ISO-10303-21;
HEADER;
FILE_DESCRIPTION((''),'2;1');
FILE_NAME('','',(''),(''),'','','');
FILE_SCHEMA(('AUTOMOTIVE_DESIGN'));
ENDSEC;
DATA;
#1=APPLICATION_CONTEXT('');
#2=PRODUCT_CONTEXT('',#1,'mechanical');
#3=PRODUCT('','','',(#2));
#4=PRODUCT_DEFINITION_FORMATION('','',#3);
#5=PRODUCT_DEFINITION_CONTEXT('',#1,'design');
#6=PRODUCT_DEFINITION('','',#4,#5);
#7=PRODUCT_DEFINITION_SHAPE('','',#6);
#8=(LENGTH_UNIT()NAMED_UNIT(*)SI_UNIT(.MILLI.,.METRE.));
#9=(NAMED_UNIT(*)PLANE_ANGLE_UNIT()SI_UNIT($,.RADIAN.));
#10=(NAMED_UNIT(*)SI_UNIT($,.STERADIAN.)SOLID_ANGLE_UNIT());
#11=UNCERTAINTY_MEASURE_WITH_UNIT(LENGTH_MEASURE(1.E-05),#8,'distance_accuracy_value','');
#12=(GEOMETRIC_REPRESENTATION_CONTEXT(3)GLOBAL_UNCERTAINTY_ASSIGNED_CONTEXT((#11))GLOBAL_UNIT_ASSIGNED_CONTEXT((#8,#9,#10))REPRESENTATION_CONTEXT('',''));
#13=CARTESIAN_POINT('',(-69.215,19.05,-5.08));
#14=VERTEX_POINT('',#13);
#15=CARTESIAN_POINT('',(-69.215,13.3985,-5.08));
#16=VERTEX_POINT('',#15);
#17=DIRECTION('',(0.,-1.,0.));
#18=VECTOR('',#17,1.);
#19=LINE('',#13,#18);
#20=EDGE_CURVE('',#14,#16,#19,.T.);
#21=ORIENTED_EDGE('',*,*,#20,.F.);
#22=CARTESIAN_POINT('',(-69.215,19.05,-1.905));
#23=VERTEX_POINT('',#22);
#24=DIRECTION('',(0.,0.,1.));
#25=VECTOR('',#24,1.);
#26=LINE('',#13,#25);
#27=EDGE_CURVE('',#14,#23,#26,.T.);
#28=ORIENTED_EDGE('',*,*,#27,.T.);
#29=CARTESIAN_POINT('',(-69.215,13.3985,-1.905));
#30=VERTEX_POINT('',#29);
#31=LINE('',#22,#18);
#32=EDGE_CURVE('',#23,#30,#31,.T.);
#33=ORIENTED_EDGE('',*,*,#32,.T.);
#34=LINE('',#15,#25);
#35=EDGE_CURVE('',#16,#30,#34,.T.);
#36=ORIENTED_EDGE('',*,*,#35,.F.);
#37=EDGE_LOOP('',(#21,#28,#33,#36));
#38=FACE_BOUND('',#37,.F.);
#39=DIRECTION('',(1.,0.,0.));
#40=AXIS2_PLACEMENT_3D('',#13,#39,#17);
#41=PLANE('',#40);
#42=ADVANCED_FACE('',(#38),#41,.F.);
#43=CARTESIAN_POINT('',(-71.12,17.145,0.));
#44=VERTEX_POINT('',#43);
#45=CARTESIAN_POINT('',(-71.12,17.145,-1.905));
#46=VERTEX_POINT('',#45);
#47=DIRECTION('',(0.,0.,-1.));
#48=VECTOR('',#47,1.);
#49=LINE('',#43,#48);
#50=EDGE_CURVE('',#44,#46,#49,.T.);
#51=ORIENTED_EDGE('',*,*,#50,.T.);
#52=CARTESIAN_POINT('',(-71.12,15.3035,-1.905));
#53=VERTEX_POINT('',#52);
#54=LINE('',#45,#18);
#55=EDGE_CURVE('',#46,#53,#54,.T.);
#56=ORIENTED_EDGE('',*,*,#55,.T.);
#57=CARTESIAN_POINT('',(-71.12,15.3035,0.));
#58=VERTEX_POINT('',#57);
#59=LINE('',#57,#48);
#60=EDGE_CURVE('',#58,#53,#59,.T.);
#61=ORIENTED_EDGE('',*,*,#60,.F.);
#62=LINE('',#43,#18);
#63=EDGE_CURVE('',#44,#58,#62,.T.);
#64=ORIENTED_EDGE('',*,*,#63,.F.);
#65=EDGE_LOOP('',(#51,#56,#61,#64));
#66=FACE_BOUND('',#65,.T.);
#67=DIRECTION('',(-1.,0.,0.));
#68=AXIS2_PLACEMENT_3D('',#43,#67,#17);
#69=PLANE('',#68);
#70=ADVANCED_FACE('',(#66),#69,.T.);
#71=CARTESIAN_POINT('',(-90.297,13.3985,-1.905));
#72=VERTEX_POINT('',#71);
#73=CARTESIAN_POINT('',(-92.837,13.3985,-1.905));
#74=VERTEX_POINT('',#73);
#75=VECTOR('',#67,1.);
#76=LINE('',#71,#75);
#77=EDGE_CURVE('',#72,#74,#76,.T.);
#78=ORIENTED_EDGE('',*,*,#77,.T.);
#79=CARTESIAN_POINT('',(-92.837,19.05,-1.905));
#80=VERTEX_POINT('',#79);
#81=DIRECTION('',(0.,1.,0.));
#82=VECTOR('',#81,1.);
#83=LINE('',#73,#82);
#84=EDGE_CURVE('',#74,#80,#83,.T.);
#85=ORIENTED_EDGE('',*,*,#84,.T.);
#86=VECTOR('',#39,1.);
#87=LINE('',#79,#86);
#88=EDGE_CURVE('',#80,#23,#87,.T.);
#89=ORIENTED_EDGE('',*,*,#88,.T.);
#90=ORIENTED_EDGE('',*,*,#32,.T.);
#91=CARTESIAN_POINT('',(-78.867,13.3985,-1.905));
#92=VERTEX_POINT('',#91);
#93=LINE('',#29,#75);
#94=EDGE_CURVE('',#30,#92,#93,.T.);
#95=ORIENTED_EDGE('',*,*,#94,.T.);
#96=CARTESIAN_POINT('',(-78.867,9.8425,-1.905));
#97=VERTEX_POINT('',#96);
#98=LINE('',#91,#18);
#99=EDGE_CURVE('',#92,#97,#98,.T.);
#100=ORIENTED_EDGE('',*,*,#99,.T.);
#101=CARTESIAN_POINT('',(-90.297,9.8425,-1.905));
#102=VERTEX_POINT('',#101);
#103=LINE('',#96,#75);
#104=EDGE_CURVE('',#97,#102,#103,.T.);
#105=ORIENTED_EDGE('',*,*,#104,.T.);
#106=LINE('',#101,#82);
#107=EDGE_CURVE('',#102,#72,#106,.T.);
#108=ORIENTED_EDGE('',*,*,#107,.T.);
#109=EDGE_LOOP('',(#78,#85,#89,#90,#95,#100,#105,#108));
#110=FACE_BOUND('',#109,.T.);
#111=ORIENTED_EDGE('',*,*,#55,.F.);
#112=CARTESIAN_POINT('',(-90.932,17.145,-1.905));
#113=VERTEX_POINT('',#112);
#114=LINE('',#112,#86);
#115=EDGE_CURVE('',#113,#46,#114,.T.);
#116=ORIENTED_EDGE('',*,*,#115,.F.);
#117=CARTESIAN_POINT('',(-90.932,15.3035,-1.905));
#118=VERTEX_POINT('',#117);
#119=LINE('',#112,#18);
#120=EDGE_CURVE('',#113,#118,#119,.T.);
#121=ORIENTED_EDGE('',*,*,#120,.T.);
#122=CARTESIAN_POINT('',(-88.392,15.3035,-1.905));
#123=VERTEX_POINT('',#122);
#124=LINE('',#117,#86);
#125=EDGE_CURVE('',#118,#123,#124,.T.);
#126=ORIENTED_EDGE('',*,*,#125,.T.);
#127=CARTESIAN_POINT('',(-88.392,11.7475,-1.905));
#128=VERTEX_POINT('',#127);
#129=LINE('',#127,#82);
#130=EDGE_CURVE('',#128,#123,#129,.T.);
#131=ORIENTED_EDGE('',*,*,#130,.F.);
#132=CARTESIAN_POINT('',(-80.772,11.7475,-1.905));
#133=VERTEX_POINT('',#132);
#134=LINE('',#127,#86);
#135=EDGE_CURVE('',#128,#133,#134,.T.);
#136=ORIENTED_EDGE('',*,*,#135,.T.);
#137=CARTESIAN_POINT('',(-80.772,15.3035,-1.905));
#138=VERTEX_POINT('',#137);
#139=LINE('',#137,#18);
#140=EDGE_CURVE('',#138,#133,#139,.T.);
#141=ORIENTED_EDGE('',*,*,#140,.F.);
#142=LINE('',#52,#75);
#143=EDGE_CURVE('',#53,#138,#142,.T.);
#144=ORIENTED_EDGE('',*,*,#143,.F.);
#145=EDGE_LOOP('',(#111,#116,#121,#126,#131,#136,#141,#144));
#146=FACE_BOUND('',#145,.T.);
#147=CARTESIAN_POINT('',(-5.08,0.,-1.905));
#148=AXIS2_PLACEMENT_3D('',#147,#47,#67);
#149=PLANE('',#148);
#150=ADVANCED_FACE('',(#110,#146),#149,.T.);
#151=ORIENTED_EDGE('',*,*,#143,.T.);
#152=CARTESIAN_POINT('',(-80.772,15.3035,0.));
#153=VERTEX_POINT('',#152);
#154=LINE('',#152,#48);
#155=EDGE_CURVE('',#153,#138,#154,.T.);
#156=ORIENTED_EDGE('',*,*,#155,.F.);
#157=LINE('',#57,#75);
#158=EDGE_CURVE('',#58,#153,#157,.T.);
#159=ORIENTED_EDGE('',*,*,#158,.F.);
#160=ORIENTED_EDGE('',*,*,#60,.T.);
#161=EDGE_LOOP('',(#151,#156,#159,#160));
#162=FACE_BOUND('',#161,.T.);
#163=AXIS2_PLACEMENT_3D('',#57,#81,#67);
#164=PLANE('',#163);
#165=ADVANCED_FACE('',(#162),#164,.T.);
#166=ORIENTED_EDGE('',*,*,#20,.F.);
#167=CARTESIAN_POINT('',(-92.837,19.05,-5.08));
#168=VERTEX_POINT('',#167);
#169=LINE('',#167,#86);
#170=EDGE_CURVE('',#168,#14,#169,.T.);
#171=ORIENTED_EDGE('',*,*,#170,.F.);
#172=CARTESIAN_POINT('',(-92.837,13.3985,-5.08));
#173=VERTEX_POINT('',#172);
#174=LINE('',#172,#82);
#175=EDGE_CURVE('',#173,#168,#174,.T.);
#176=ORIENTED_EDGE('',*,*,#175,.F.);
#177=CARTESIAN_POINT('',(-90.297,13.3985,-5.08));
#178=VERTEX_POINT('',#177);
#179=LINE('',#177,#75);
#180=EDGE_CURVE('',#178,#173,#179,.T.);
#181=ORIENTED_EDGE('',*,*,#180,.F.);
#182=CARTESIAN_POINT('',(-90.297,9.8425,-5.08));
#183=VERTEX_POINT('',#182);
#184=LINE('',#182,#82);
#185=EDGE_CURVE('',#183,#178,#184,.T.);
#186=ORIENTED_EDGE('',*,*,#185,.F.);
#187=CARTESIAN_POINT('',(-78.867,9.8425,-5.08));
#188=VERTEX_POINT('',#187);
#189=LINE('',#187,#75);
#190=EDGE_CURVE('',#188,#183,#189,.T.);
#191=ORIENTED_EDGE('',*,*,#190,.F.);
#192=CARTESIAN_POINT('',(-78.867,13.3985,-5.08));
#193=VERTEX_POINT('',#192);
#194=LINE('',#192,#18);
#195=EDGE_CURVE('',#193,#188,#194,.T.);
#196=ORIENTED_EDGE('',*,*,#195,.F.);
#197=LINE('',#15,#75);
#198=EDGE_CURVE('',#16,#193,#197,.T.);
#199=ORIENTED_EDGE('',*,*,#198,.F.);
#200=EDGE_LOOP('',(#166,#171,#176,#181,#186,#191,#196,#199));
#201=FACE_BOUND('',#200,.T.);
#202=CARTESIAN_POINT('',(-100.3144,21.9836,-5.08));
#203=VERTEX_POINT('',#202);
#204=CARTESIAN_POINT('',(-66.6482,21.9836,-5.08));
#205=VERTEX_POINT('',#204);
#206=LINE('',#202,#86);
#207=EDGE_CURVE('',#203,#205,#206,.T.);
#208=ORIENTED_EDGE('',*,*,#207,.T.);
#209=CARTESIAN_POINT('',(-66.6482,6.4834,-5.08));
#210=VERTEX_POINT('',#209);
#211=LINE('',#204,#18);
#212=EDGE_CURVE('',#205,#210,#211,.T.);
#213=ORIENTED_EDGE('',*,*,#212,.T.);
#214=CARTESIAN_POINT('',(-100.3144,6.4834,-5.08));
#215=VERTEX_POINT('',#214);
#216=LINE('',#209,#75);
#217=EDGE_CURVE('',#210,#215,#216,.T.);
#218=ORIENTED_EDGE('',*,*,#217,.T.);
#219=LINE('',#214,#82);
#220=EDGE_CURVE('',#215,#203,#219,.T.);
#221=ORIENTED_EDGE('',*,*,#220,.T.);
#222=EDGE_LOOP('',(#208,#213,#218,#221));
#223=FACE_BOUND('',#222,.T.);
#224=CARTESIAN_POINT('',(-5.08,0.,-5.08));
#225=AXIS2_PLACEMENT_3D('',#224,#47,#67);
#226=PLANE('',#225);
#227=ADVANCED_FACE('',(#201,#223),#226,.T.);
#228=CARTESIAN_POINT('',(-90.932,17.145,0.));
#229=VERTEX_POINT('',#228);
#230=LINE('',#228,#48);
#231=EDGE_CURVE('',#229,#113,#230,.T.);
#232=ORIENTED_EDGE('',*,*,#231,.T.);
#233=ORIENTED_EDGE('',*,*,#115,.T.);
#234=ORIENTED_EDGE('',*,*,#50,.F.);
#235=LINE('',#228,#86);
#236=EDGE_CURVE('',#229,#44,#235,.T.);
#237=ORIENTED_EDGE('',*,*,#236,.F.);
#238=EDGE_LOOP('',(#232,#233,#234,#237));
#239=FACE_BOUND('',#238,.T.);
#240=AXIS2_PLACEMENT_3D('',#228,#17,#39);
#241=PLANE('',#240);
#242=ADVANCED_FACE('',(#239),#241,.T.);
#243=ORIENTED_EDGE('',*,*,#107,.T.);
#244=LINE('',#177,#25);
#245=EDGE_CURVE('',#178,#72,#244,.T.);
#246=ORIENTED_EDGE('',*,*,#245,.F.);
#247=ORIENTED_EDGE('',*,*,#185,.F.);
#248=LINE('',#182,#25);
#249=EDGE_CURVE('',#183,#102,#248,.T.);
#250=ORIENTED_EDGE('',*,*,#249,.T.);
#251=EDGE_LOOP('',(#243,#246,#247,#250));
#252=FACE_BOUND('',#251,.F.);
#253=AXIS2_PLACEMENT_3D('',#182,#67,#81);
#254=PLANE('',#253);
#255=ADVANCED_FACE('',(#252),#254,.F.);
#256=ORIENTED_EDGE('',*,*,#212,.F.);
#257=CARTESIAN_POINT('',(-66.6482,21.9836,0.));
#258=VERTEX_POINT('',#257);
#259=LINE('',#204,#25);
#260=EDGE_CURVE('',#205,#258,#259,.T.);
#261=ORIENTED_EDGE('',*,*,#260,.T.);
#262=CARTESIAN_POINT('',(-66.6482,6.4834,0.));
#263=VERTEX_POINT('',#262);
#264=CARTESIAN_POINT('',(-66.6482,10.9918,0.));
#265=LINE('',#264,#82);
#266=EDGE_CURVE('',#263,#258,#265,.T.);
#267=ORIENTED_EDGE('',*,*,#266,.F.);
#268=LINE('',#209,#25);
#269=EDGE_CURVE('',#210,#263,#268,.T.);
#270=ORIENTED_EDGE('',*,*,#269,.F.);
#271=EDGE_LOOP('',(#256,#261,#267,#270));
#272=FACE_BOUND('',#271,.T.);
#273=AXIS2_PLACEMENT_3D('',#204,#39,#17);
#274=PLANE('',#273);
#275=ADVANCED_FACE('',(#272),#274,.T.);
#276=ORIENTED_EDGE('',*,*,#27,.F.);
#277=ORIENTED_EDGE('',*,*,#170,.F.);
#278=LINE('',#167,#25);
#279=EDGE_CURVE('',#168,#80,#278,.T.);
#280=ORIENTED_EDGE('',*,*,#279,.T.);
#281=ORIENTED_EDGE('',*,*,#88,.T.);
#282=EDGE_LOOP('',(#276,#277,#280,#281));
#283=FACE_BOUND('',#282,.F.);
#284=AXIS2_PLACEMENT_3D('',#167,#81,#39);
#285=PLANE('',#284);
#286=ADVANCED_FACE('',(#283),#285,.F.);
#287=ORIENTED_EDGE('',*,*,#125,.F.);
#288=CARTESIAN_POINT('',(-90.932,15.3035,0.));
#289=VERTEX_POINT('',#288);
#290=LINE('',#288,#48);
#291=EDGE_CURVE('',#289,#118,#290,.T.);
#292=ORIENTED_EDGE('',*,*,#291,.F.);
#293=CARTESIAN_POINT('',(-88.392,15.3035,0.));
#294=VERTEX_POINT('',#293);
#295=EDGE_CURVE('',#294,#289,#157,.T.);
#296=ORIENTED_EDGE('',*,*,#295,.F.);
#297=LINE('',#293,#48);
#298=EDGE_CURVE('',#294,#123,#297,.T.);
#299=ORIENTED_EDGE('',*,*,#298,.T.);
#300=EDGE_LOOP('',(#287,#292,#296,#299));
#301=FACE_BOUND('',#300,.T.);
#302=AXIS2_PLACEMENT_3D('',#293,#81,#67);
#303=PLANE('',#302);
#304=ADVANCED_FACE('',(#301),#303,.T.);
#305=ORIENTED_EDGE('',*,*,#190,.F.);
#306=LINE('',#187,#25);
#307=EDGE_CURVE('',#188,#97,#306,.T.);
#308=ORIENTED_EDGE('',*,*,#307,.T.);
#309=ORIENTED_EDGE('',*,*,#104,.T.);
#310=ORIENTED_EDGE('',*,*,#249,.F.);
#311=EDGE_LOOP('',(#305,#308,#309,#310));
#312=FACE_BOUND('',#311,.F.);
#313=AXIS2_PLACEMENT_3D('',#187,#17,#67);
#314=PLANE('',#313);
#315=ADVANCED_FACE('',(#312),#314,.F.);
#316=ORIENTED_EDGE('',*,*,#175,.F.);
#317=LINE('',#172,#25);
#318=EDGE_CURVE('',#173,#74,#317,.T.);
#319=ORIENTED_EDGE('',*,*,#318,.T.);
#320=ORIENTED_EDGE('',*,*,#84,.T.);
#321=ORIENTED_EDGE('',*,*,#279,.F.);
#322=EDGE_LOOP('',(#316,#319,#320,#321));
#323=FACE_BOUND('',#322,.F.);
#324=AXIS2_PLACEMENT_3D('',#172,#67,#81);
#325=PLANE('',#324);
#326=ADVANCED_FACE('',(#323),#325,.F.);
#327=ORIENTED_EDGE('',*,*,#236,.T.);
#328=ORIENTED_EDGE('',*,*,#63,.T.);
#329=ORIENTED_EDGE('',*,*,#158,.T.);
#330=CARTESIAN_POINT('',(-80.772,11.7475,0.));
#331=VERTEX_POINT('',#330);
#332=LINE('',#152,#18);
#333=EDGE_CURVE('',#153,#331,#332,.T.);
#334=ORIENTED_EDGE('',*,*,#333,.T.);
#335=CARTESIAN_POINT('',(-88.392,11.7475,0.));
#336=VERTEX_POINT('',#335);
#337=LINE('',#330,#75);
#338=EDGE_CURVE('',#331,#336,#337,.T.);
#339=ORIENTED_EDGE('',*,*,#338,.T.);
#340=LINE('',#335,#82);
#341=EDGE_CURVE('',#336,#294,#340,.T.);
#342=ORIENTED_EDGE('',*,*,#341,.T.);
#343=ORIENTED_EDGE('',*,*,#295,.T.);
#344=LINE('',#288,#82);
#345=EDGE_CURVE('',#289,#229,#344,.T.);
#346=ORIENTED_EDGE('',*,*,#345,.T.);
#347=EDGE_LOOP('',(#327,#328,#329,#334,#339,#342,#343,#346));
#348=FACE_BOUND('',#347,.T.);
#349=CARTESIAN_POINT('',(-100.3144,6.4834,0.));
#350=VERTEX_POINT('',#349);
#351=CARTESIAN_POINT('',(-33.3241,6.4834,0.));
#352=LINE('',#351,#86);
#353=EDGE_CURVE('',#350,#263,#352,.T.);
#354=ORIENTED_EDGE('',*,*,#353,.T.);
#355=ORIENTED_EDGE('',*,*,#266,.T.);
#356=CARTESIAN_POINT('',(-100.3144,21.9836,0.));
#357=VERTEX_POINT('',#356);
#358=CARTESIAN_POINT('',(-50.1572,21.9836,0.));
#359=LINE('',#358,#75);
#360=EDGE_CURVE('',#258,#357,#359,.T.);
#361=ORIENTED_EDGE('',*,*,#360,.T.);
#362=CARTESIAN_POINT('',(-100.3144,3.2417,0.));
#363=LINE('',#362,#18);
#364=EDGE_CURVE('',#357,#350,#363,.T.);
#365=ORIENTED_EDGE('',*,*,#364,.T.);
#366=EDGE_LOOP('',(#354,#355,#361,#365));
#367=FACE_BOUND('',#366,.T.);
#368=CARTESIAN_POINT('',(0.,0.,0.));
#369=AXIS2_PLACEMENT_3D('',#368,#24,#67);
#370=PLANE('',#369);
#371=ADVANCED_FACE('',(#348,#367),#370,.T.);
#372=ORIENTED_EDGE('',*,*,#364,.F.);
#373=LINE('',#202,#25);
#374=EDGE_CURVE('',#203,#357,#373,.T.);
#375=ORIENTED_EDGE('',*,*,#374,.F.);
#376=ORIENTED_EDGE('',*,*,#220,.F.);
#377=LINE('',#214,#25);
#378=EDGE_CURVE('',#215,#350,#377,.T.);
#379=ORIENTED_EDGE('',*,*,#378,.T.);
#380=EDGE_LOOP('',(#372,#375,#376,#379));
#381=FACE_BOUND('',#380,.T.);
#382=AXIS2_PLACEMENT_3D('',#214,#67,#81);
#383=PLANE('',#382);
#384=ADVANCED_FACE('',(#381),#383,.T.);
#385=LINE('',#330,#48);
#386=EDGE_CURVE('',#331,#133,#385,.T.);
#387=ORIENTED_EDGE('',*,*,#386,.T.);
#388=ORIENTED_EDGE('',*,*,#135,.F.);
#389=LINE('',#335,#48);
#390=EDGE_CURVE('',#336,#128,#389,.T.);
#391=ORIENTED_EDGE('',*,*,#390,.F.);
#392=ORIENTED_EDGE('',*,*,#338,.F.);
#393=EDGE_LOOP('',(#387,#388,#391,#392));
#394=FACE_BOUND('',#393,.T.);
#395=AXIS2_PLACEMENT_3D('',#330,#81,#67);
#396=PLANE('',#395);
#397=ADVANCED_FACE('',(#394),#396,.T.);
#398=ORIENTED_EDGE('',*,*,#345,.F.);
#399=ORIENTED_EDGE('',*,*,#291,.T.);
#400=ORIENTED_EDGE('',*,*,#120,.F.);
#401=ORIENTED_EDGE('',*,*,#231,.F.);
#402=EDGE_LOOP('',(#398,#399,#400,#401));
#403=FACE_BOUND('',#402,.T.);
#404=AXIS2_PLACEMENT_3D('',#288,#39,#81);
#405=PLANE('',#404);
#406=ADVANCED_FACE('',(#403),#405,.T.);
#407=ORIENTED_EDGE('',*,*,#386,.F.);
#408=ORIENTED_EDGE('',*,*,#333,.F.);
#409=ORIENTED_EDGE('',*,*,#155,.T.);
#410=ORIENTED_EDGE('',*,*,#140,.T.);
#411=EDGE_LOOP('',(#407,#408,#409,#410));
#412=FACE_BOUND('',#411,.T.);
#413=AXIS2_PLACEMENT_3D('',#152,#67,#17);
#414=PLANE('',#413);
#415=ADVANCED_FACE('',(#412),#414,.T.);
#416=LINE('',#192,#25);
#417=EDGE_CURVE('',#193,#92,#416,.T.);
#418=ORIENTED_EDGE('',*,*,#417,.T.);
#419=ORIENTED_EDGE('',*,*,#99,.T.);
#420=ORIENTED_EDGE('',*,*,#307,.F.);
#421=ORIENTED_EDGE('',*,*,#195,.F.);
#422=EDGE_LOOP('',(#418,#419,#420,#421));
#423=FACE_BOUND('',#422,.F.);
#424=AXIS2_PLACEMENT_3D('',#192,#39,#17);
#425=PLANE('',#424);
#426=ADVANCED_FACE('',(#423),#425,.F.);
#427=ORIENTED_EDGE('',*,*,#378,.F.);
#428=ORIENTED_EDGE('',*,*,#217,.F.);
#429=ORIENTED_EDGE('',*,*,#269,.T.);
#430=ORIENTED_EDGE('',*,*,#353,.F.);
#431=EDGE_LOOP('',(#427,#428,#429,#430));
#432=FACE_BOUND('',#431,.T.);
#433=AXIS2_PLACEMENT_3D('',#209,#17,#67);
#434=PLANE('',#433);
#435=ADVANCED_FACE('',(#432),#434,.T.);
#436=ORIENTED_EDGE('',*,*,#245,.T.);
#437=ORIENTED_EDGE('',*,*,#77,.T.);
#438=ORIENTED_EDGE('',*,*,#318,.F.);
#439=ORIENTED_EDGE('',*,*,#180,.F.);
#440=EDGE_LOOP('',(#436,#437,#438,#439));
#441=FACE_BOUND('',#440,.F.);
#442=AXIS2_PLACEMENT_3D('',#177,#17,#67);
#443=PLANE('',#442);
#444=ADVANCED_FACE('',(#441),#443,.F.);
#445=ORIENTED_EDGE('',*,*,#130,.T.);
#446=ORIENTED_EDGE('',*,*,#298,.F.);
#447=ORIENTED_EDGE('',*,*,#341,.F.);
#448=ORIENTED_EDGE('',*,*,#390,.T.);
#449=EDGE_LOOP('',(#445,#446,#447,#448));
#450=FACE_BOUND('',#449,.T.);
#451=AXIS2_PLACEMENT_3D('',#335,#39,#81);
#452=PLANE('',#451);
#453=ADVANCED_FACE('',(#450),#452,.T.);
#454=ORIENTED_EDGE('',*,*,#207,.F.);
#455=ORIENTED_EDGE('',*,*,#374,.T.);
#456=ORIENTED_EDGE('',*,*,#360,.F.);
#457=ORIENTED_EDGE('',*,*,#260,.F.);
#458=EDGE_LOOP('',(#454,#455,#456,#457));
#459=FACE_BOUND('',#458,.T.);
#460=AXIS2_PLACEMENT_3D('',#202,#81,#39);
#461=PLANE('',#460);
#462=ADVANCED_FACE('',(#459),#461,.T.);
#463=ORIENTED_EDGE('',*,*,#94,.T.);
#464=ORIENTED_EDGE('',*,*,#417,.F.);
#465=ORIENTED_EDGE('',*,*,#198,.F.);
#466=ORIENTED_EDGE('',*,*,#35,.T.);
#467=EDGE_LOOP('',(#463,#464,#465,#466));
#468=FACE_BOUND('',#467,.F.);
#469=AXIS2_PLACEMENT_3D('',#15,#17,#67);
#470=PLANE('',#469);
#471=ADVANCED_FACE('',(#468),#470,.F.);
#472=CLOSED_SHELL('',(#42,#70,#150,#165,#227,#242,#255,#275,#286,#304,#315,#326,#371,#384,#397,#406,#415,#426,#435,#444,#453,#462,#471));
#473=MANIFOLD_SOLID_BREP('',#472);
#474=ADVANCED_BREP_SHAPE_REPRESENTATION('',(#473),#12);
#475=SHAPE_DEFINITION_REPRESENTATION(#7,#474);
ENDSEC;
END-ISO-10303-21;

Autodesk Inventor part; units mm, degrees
ref_plane "YZ Plane" through (0, 0, 0) normal (1, 0, 0) x (0, 1, 0)
ref_plane "XZ Plane" through (0, 0, 0) normal (0, 1, 0) x (-1, 0, 0)
ref_plane "XY Plane" through (0, 0, 0) normal (0, 0, 1) x (1, 0, 0)
sketch "Sketch1" plane through (0, 0, 0) normal (0, 1, 0) x (-1, 0, 0)
  line L0 (0, 0) -> (177.8, 0)
  line L1 (177.8, 0) -> (177.8, -114.3)
  line L2 (177.8, -114.3) -> (0, -114.3)
  line L3 (0, -114.3) -> (0, 0)
  dimension "d0" = 177.8
  dimension "d1" = 114.3
extrude "Extrusion1" add sketch "Sketch1" along normal blind 38.1
sketch "Sketch2" plane through (0, 0, 0) normal (0, -1, 0) x (1, 0, 0)
  line L0 (-177.8, -114.3) -> (-177.8, 0) projected
  line L1 (0, 0) -> (-177.8, 0)
  line L2 (-177.8, 0) -> (-177.8, -114.3)
  line L3 (-177.8, -114.3) -> (0, -114.3)
  line L4 (0, -114.3) -> (0, 0)
  line L5 (-5.08, -5.08) -> (-172.72, -5.08)
  line L6 (-172.72, -5.08) -> (-172.72, -109.22)
  line L7 (-172.72, -109.22) -> (-5.08, -109.22)
  line L8 (-5.08, -109.22) -> (-5.08, -5.08)
  dimension "d4" = 5.08
extrude "Extrusion2" cut sketch "Sketch2" against normal blind 35.56 contours L8 L7 L6 L5
fillet "Fillet1" radius 3.175 4 edges at (-177.8, 38.1, -57.15) (-88.9, 38.1, 0) (-88.9, 38.1, -114.3) (0, 38.1, -57.15)
sketch "Sketch3" plane through (0, 38.1, 0) normal (0, 1, 0) x (1, 0, 0)
  line L0 (-177.8, 114.3) -> (-171.45, 114.3)
  line L1 (-171.45, 114.3) -> (-171.45, 0)
  line L2 (-171.45, 0) -> (-177.8, 0)
  line L3 (-177.8, 0) -> (-177.8, 114.3)
  line L4 (0, 114.3) -> (-177.8, 114.3) projected
  line L5 (-177.8, 114.3) -> (0, 114.3)
  line L6 (0, 114.3) -> (0, 107.95)
  line L7 (0, 107.95) -> (-177.8, 107.95)
  line L8 (-177.8, 107.95) -> (-177.8, 114.3)
  line L9 (-158.75, 100.4887) -> (-100.6475, 100.4887)
  line L10 (-100.6475, 100.4887) -> (-100.6475, 13.8112)
  line L11 (-100.6475, 13.8112) -> (-158.75, 13.8112)
  line L12 (-158.75, 13.8112) -> (-158.75, 100.4887)
  point P0 (0, 0)
  dimension "d8" = 6.35
  dimension "d9" = 6.35
  dimension "d10" = 58.1025
  dimension "d11" = 86.6775
  dimension "d12" = 13.8112
  dimension "d13" = 19.05
extrude "Extrusion3" cut sketch "Sketch3" against normal blind 35.56 contours L9 L10 L11 L12
sketch "Sketch4" plane through (0, 38.1, 0) normal (0, 1, 0) x (1, 0, 0)
  line L0 (-94.2975, 17.78) -> (-81.2088, 17.78)
  line L1 (-91.7575, 20.32) -> (-91.7575, 26.67)
  line L2 (-91.7575, 26.67) -> (-94.2975, 26.67)
  line L3 (-94.2975, 26.67) -> (-94.2975, 17.78)
  line L4 (-94.2975, 17.78) -> (-78.6765, 17.78)
  line L5 (-78.6765, 17.78) -> (-78.6765, 20.32)
  line L6 (-94.2975, 24.2647) -> (-94.2975, 17.78)
  line L7 (-85.6615, 20.32) -> (-85.6615, 24.13)
  line L8 (-85.6615, 24.13) -> (-88.2015, 24.13)
  line L9 (-88.2015, 24.13) -> (-88.2015, 20.32)
  line L10 (-78.6765, 20.32) -> (-85.6615, 20.32)
  line L11 (-88.2015, 20.32) -> (-91.7575, 20.32)
  line L12 (-100.6475, 100.4887) -> (-100.6475, 13.8112) projected
  line L13 (-177.8, 0) -> (0, 0) projected
  line L14 (-94.2975, 27.94) -> (-78.6765, 27.94)
  line L15 (-78.6765, 27.94) -> (-78.6765, 30.7699)
  line L16 (-81.2165, 30.48) -> (-94.2975, 30.48)
  line L17 (-94.2975, 30.48) -> (-94.2975, 27.94)
  line L18 (-83.0828, 27.94) -> (-78.6765, 27.94)
  line L19 (-78.6765, 27.94) -> (-78.6765, 36.83)
  line L20 (-78.6765, 36.83) -> (-81.2165, 36.83)
  line L21 (-81.2165, 36.83) -> (-81.2165, 30.48)
  ellipse E0 centre (-86.487, 41.91) end of major axis (-94.2975, 41.91) minor radius 5.334
  ellipse E1 centre (-86.487, 53.34) end of major axis (-94.2975, 53.34) minor radius 5.334
  line L22 (-94.2975, 60.96) -> (-78.6765, 60.96)
  line L23 (-78.6765, 60.96) -> (-78.6765, 63.754)
  line L24 (-94.2975, 63.754) -> (-94.2975, 60.96)
  ellipse E2 centre (-86.487, 63.754) end of major axis (-94.2975, 63.754) minor radius 7.62 (-78.6765, 63.754) -> (-94.2975, 63.754) ccw
  line L25 (-91.7575, 63.754) -> (-91.7575, 63.5)
  line L26 (-91.7575, 63.5) -> (-81.2165, 63.5)
  line L27 (-81.2165, 63.5) -> (-81.2165, 63.754)
  line L28 (-94.2975, 82.55) -> (-78.6765, 82.55)
  line L29 (-78.6765, 82.55) -> (-78.6765, 80.01)
  line L30 (-78.6765, 80.01) -> (-94.2975, 80.01)
  line L31 (-94.2975, 80.01) -> (-94.2975, 82.55)
  line L32 (-91.7575, 89.535) -> (-78.6765, 89.535)
  line L33 (-78.6765, 89.535) -> (-78.6765, 92.075)
  line L34 (-78.6765, 92.075) -> (-91.7575, 92.075)
  line L35 (-94.2975, 94.8241) -> (-94.2975, 91.9305)
  line L36 (-94.2975, 85.09) -> (-91.7575, 85.09)
  line L37 (-91.7575, 96.52) -> (-94.2975, 96.52)
  line L38 (-94.2975, 96.52) -> (-94.2975, 85.09)
  line L39 (-91.7575, 85.09) -> (-91.7575, 89.535)
  line L40 (-91.7575, 92.075) -> (-91.7575, 96.52)
  spline S0 degree 5 poles (-91.7575, 41.91) (-91.7584, 41.6813) (-91.6944, 41.4527) (-91.5885, 41.2473) (-91.2042, 40.6846) (-90.6636, 40.2564) (-90.282, 40.0177) (-89.3306, 39.5478) (-88.3046, 39.2718) (-87.7026, 39.1679) (-86.487, 39.0641) (-85.2714, 39.1679) (-84.6694, 39.2718) (-83.6435, 39.5478) (-82.692, 40.0176) (-82.3107, 40.2563) (-81.7696, 40.6845) (-81.3858, 41.2473) (-81.2787, 41.4526) (-81.1539, 41.91) (-81.2787, 42.3674) (-81.3858, 42.5727) (-81.7696, 43.1355) (-82.3107, 43.5637) (-82.692, 43.8024) (-83.6435, 44.2722) (-84.6694, 44.5482) (-85.2714, 44.6521) (-86.487, 44.7559) (-87.7026, 44.6521) (-88.3046, 44.5482) (-89.3306, 44.2722) (-90.282, 43.8023) (-90.6636, 43.5636) (-91.2042, 43.1354) (-91.5885, 42.5727) (-91.6944, 42.3673) (-91.7584, 42.1387) (-91.7575, 41.91) knots 0 0 0 0 0 0 0.044471 0.044471 0.044471 0.131758 0.131758 0.131758 0.25 0.25 0.25 0.36824 0.36824 0.36824 0.455522 0.455522 0.455522 0.5 0.5 0.5 0.544478 0.544478 0.544478 0.63176 0.63176 0.63176 0.75 0.75 0.75 0.868242 0.868242 0.868242 0.955529 0.955529 0.955529 1 1 1 1 1 1
  spline S1 degree 5 poles (-91.7575, 53.34) (-91.7584, 53.1113) (-91.6944, 52.8827) (-91.5885, 52.6773) (-91.2042, 52.1146) (-90.6636, 51.6864) (-90.282, 51.4477) (-89.3306, 50.9778) (-88.3046, 50.7018) (-87.7026, 50.5979) (-86.487, 50.4941) (-85.2714, 50.5979) (-84.6694, 50.7018) (-83.6435, 50.9778) (-82.692, 51.4476) (-82.3107, 51.6863) (-81.7696, 52.1145) (-81.3858, 52.6773) (-81.2787, 52.8826) (-81.1539, 53.34) (-81.2787, 53.7974) (-81.3858, 54.0027) (-81.7696, 54.5655) (-82.3107, 54.9937) (-82.692, 55.2324) (-83.6435, 55.7022) (-84.6694, 55.9782) (-85.2714, 56.0821) (-86.487, 56.1859) (-87.7026, 56.0821) (-88.3046, 55.9782) (-89.3306, 55.7022) (-90.282, 55.2323) (-90.6636, 54.9936) (-91.2042, 54.5654) (-91.5885, 54.0027) (-91.6944, 53.7973) (-91.7584, 53.5687) (-91.7575, 53.34) knots 0 0 0 0 0 0 0.044471 0.044471 0.044471 0.131758 0.131758 0.131758 0.25 0.25 0.25 0.36824 0.36824 0.36824 0.455522 0.455522 0.455522 0.5 0.5 0.5 0.544478 0.544478 0.544478 0.63176 0.63176 0.63176 0.75 0.75 0.75 0.868242 0.868242 0.868242 0.955529 0.955529 0.955529 1 1 1 1 1 1
  spline S2 degree 5 poles (-81.2165, 63.754) (-81.2166, 64.309) (-81.2953, 64.8639) (-81.4525, 65.404) (-82.1282, 66.8995) (-83.3585, 68.0474) (-84.3453, 68.5716) (-86.487, 69.0964) (-88.6287, 68.5716) (-89.6155, 68.0474) (-90.8458, 66.8995) (-91.5215, 65.404) (-91.6787, 64.8639) (-91.7574, 64.309) (-91.7575, 63.754) knots 0 0 0 0 0 0 0.170659 0.170659 0.170659 0.5 0.5 0.5 0.829341 0.829341 0.829341 1 1 1 1 1 1
  point P0 (-94.2975, 93.3773)
  point P1 (-88.9, 0)
  point P2 (-93.0275, 85.09)
  dimension "d32" = 5.334
  dimension "d33" = 7.8105
  dimension "d36" = 7.8105
  dimension "d37" = 5.334
  dimension "d42" = 7.62
  dimension "d43" = 2.54
  dimension "d16" = 2.54
  dimension "d17" = 3.556
  dimension "d18" = 2.54
  dimension "d19" = 6.985
  dimension "d20" = 8.89
  dimension "d21" = 6.35
  dimension "d22" = 3.81
  dimension "d23" = 3.81
  dimension "d24" = 6.35
  dimension "d25" = 17.78
  dimension "d26" = 2.54
  dimension "d27" = 2.54
  dimension "d28" = 6.35
  dimension "d29" = 15.621
  dimension "d30" = 6.35
  dimension "d31" = 27.94
  dimension "d34" = 14.1605
  dimension "d35" = 41.91
  dimension "d38" = 14.1605
  dimension "d39" = 53.34
  dimension "d40" = 2.54
  dimension "d41" = 2.54
  dimension "d44" = 6.35
  dimension "d45" = 15.621
  dimension "d46" = 60.96
  dimension "d47" = 2.794
  dimension "d48" = 63.754
  dimension "d49" = 14.1605
  dimension "d50" = 2.54
  dimension "d51" = 15.621
  dimension "d52" = 4.445
  dimension "d53" = 4.445
  dimension "d54" = 2.54
  dimension "d55" = 2.54
  dimension "d56" = 6.35
  dimension "d57" = 80.01
  dimension "d58" = 2.54
  dimension "d59" = 13.081
  dimension "d62" = 3.9688
  dimension "d63" = 3.9688
extrude "Extrusion4" cut sketch "Sketch4" against normal blind 1.27
sketch "Sketch5" plane through (0, 38.1, 0) normal (0, 1, 0) x (1, 0, 0)
  line L0 (-43.4975, 22.6219) -> (-37.9413, 22.6219)
  line L1 (-37.9413, 22.6219) -> (-37.9413, 28.1781)
  line L2 (-37.9413, 28.1781) -> (-43.4975, 28.1781)
  line L3 (-43.4975, 28.1781) -> (-43.4975, 22.6219)
  line L4 (-43.4975, 38.4969) -> (-37.9413, 38.4969)
  line L5 (-37.9413, 38.4969) -> (-37.9413, 44.0531)
  line L6 (-37.9413, 44.0531) -> (-43.4975, 44.0531)
  line L7 (-43.4975, 44.0531) -> (-43.4975, 38.4969)
  line L8 (-43.4975, 54.3719) -> (-37.9413, 54.3719)
  line L9 (-37.9413, 54.3719) -> (-37.9413, 59.9281)
  line L10 (-37.9413, 59.9281) -> (-43.4975, 59.9281)
  line L11 (-43.4975, 59.9281) -> (-43.4975, 54.3719)
  line L12 (-43.4975, 70.2469) -> (-37.9413, 70.2469)
  line L13 (-37.9413, 70.2469) -> (-37.9413, 75.8031)
  line L14 (-37.9413, 75.8031) -> (-43.4975, 75.8031)
  line L15 (-43.4975, 75.8031) -> (-43.4975, 70.2469)
  line L16 (-43.4975, 86.1219) -> (-37.9413, 86.1219)
  line L17 (-37.9413, 86.1219) -> (-37.9413, 91.6781)
  line L18 (-37.9413, 91.6781) -> (-43.4975, 91.6781)
  line L19 (-43.4975, 91.6781) -> (-43.4975, 86.1219)
  line L20 (0, 114.3) -> (-177.8, 114.3) projected
  line L21 (-177.8, 0) -> (0, 0) projected
  line L22 (-100.6475, 100.4887) -> (-100.6475, 13.8112) projected
  circle A0 centre (-21.9075, 25.4) radius 3.81
  circle A1 centre (-21.9075, 41.275) radius 3.81
  circle A2 centre (-21.9075, 57.15) radius 3.81
  circle A3 centre (-21.9075, 73.025) radius 3.81
  circle A4 centre (-21.9075, 88.9) radius 3.81
  point P0 (-43.4975, 73.025)
  dimension "d64" = 5.5563
  dimension "d65" = 5.5563
  dimension "d66" = 5.5563
  dimension "d67" = 5.5563
  dimension "d68" = 5.5563
  dimension "d69" = 5.5563
  dimension "d70" = 15.875
  dimension "d71" = 15.875
  dimension "d72" = 15.875
  dimension "d73" = 15.875
  dimension "d74" = 22.6219
  dimension "d76" = 57.15
  dimension "d77" = 7.62
  dimension "d78" = 7.62
  dimension "d79" = 7.62
  dimension "d80" = 7.62
  dimension "d81" = 7.62
  dimension "d82" = 15.875
  dimension "d83" = 15.875
  dimension "d84" = 15.875
  dimension "d85" = 15.875
  dimension "d86" = 25.4
  dimension "d87" = 78.74
  dimension "d88" = 78.74
  dimension "d89" = 78.74
  dimension "d90" = 78.74
  dimension "d91" = 78.74
extrude "Extrusion5" cut sketch "Sketch5" against normal blind 25.4
sketch "Sketch6" plane through (0, 35.56, 0) normal (0, -1, 0) x (1, 0, 0)
  circle A0 centre (-21.9075, -88.9) radius 3.81 projected
  circle A1 centre (-21.9075, -88.9) radius 5.08
  circle A2 centre (-21.9075, -73.025) radius 3.81 projected
  circle A3 centre (-21.9075, -73.025) radius 5.08
  circle A4 centre (-21.9075, -57.15) radius 3.81 projected
  circle A5 centre (-21.9075, -57.15) radius 5.08
  circle A6 centre (-21.9075, -41.275) radius 3.81 projected
  circle A7 centre (-21.9075, -41.275) radius 5.08
  circle A8 centre (-21.9075, -25.4) radius 3.81 projected
  circle A9 centre (-21.9075, -25.4) radius 5.08
  line L0 (-43.4975, -59.9281) -> (-37.9413, -59.9281)
  line L1 (-37.9413, -59.9281) -> (-37.9413, -54.3719)
  line L2 (-37.9413, -54.3719) -> (-43.4975, -54.3719)
  line L3 (-43.4975, -54.3719) -> (-43.4975, -59.9281)
  line L4 (-45.4025, -61.8331) -> (-36.0363, -61.8331)
  line L5 (-36.0363, -61.8331) -> (-36.0363, -52.4669)
  line L6 (-36.0363, -52.4669) -> (-45.4025, -52.4669)
  line L7 (-45.4025, -52.4669) -> (-45.4025, -61.8331)
  line L8 (-43.4975, -91.6781) -> (-37.9413, -91.6781)
  line L9 (-37.9413, -91.6781) -> (-37.9413, -86.1219)
  line L10 (-37.9413, -86.1219) -> (-43.4975, -86.1219)
  line L11 (-43.4975, -86.1219) -> (-43.4975, -91.6781)
  line L12 (-43.4975, -75.8031) -> (-37.9413, -75.8031) projected
  line L13 (-37.9413, -70.2469) -> (-36.6713, -68.9769) projected
  line L14 (-43.4975, -75.8031) -> (-37.9413, -75.8031)
  line L15 (-37.9413, -75.8031) -> (-37.9413, -70.2469)
  line L16 (-37.9413, -70.2469) -> (-43.4975, -70.2469)
  line L17 (-43.4975, -70.2469) -> (-43.4975, -75.8031)
  line L18 (-43.4975, -38.4969) -> (-43.4975, -44.0531) projected
  line L19 (-43.4975, -44.0531) -> (-37.9413, -44.0531)
  line L20 (-37.9413, -44.0531) -> (-37.9413, -38.4969)
  line L21 (-37.9413, -38.4969) -> (-43.4975, -38.4969)
  line L22 (-43.4975, -38.4969) -> (-43.4975, -44.0531)
  line L23 (-37.9413, -28.1781) -> (-43.4975, -28.1781) projected
  line L24 (-37.9413, -22.6219) -> (-36.6713, -21.3519) projected
  line L25 (-43.4975, -28.1781) -> (-37.9413, -28.1781)
  line L26 (-37.9413, -28.1781) -> (-37.9413, -22.6219)
  line L27 (-37.9413, -22.6219) -> (-43.4975, -22.6219)
  line L28 (-43.4975, -22.6219) -> (-43.4975, -28.1781)
  line L29 (-45.4025, -77.7081) -> (-36.0363, -77.7081)
  line L30 (-36.0363, -77.7081) -> (-36.0363, -68.3419)
  line L31 (-36.0363, -68.3419) -> (-45.4025, -68.3419)
  line L32 (-45.4025, -68.3419) -> (-45.4025, -77.7081)
  line L33 (-45.4025, -84.2169) -> (-36.0362, -84.2169)
  line L34 (-36.0362, -84.2169) -> (-36.0362, -93.5831)
  line L35 (-36.0362, -93.5831) -> (-45.4025, -93.5831)
  line L36 (-45.4025, -93.5831) -> (-45.4025, -84.2169)
  line L37 (-36.0362, -45.9581) -> (-45.4025, -45.9581)
  line L38 (-45.4025, -45.9581) -> (-45.4025, -36.5919)
  line L39 (-45.4025, -36.5919) -> (-36.0362, -36.5919)
  line L40 (-36.0362, -36.5919) -> (-36.0362, -45.9581)
  line L41 (-45.4025, -30.0831) -> (-36.0363, -30.0831)
  line L42 (-36.0363, -30.0831) -> (-36.0363, -20.7169)
  line L43 (-36.0363, -20.7169) -> (-45.4025, -20.7169)
  line L44 (-45.4025, -20.7169) -> (-45.4025, -30.0831)
  line L45 (-48.3394, -99.6918) -> (-33.0994, -99.6918)
  line L46 (-33.0994, -99.6918) -> (-33.0994, -14.6018)
  line L47 (-33.0994, -14.6018) -> (-48.3394, -14.6018)
  line L48 (-48.3394, -14.6018) -> (-48.3394, -99.6918)
  point P0 (0, 0)
  point P1 (-43.4975, -38.4969)
  point P2 (-40.7194, -44.0531)
  point P3 (-40.7194, -91.6781)
  point P4 (-40.7194, -14.6018)
  dimension "d97" = 10.16
  dimension "d98" = 10.16
  dimension "d99" = 10.16
  dimension "d100" = 10.16
  dimension "d101" = 10.16
  dimension "d119" = 1.905
  dimension "d120" = 1.905
  dimension "d121" = 1.905
  dimension "d122" = 1.905
  dimension "d123" = 1.905
  dimension "d136" = 15.24
  dimension "d137" = 85.09
  dimension "d139" = 7.62
  dimension "d140" = 8.0137
  dimension "d141" = 8.02
extrude "Extrusion6" cut sketch "Sketch6" against normal blind 1.27 contours A1 | A3 | A5 | A7 | A9
extrude "Extrusion9" cut sketch "Sketch6" against normal blind 1.7463 contours L7 L6 L5 L4 | L32 L31 L30 L29 | L33 L34 L35 L36 | L37 L38 L39 L40 | L44 L43 L42 L41
sketch "Sketch8" plane through (0, 35.56, 0) normal (0, -1, 0) x (1, 0, 0)
  line L0 (-100.6475, -13.8112) -> (-100.6475, -100.4887) projected
  line L1 (-100.6475, -13.8112) -> (-158.75, -13.8112)
  line L2 (-158.75, -13.8112) -> (-158.75, -7.4613)
  line L3 (-158.75, -7.4613) -> (-100.6475, -7.4612)
  line L4 (-100.6475, -7.4612) -> (-100.6475, -13.8112)
  line L5 (-158.75, -100.4887) -> (-100.6475, -100.4887) projected
  line L6 (-100.6475, -100.4887) -> (-158.75, -100.4887)
  line L7 (-158.75, -100.4887) -> (-158.75, -107.4737)
  line L8 (-158.75, -107.4737) -> (-100.6475, -107.4737)
  line L9 (-100.6475, -107.4737) -> (-100.6475, -100.4887)
  line L10 (-100.6475, -7.4612) -> (-94.2975, -7.4612)
  line L11 (-94.2975, -7.4612) -> (-94.2975, -13.8112)
  line L12 (-94.2975, -13.8112) -> (-100.6475, -13.8112)
  line L13 (-100.6475, -13.8112) -> (-100.6475, -7.4612)
  line L14 (-100.6475, -100.4887) -> (-94.2975, -100.4887)
  line L15 (-94.2975, -100.4887) -> (-94.2975, -107.4737)
  line L16 (-94.2975, -107.4737) -> (-100.6475, -107.4737)
  line L17 (-100.6475, -107.4737) -> (-100.6475, -100.4887)
  line L18 (-158.75, -100.4887) -> (-165.1, -100.4887)
  line L19 (-165.1, -100.4887) -> (-165.1, -107.4737)
  line L20 (-165.1, -107.4737) -> (-158.75, -107.4737)
  line L21 (-158.75, -107.4737) -> (-158.75, -100.4887)
  line L22 (-158.75, -7.4613) -> (-165.1, -7.4613)
  line L23 (-165.1, -7.4613) -> (-165.1, -13.8112)
  line L24 (-165.1, -13.8112) -> (-158.75, -13.8112)
  line L25 (-158.75, -13.8112) -> (-158.75, -7.4613)
  line L26 (-102.4053, -9.0487) -> (-155.7453, -9.0487)
  line L27 (-155.7453, -9.0487) -> (-155.7453, -12.2237)
  line L28 (-155.7453, -12.2237) -> (-102.4053, -12.2237)
  line L29 (-102.4053, -12.2237) -> (-102.4053, -9.0487)
  point P0 (0, 0)
  dimension "d126" = 6.35
  dimension "d127" = 6.985
  dimension "d128" = 6.35
  dimension "d129" = 6.35
  dimension "d130" = 6.35
  dimension "d131" = 53.34
  dimension "d132" = 3.175
  dimension "d133" = 1.5875
extrude "Extrusion10" cut sketch "Sketch8" against normal blind 1.27 contours L29 L28 L27 L26
extrude "Extrusion11" cut sketch "Sketch6" against normal blind 0.9525 contours L48 L47 L46 L45
sketch "Sketch9" plane through (-177.8, 0, 0) normal (0, 0, 1) x (1, 0, 0)
  line L0 (77.1525, 35.56) -> (19.05, 35.56) projected
  line L1 (172.72, 0) -> (5.08, 0) projected
  line L2 (77.1525, 35.56) -> (127.9525, 35.56)
  line L3 (127.9525, 35.56) -> (127.9525, 0)
  line L4 (127.9525, 0) -> (77.1525, 0)
  line L5 (77.1525, 0) -> (77.1525, 35.56)
  line L6 (86.868, 17.145) -> (106.68, 17.145)
  line L7 (106.68, 17.145) -> (106.68, 15.3035)
  line L8 (106.68, 15.3035) -> (86.868, 15.3035)
  line L9 (86.868, 15.3035) -> (86.868, 17.145)
  line L10 (89.408, 15.3035) -> (97.028, 15.3035)
  line L11 (97.028, 15.3035) -> (97.028, 11.7475)
  line L12 (97.028, 11.7475) -> (89.408, 11.7475)
  line L13 (89.408, 11.7475) -> (89.408, 15.3035)
  line L14 (0, 34.925) -> (177.8, 34.925) projected
  line L15 (0, 0) -> (0, 34.925) projected
  line L16 (177.8, 0) -> (177.8, 34.925) projected
  point P0 (97.028, 15.3035)
  dimension "d144" = 50.8
  dimension "d145" = 19.812
  dimension "d146" = 1.8415
  dimension "d147" = 7.62
  dimension "d148" = 3.556
  dimension "d149" = 2.54
  dimension "d150" = 17.78
  dimension "d187" = 71.12
extrude "Extrusion12" cut sketch "Sketch9" against normal blind 5.08 contours L6 L7 L8 L9 | L8 L11 L12 L13
sketch "Sketch10" plane through (-5.08, 0, -5.08) normal (0, 0, -1) x (-1, 0, 0)
  line L0 (83.312, 11.7475) -> (75.692, 11.7475) projected
  line L1 (83.312, 15.3035) -> (85.852, 15.3035) projected
  line L2 (75.692, 11.7475) -> (83.312, 11.7475)
  line L3 (83.312, 11.7475) -> (83.312, 15.3035)
  line L4 (75.692, 15.3035) -> (75.692, 11.7475)
  line L5 (75.692, 15.3035) -> (66.04, 15.3035) projected
  line L6 (85.852, 17.145) -> (85.852, 15.3035) projected
  line L7 (85.852, 15.3035) -> (85.852, 17.145)
  line L8 (85.852, 17.145) -> (66.04, 17.145)
  line L9 (66.04, 17.145) -> (66.04, 15.3035)
  line L10 (66.04, 15.3035) -> (75.692, 15.3035)
  line L11 (83.312, 15.3035) -> (85.852, 15.3035)
  line L12 (73.787, 9.8425) -> (85.217, 9.8425)
  line L13 (85.217, 9.8425) -> (85.217, 13.3985)
  line L14 (85.217, 13.3985) -> (87.757, 13.3985)
  line L15 (87.757, 13.3985) -> (87.757, 19.05)
  line L16 (87.757, 19.05) -> (64.135, 19.05)
  line L17 (64.135, 19.05) -> (64.135, 13.3985)
  line L18 (64.135, 13.3985) -> (73.787, 13.3985)
  line L19 (73.787, 13.3985) -> (73.787, 9.8425)
  line L20 (73.787, 13.3985) -> (73.787, 15.3035)
  line L21 (85.217, 13.3985) -> (85.217, 15.3035)
  point P0 (-5.08, 0)
  dimension "d153" = 1.905
extrude "Extrusion13" cut sketch "Sketch10" against normal blind 3.175 contours L3 L1 L21 L13 L12 L19 L20 L5 L4 L0 | L1 L6 L8 L9 L5 L20 L18 L17 L16 L15 L14 L21
sketch "Sketch11" plane through (0, 0, -114.3) normal (0, 0, -1) x (-1, 0, 0)
  line L0 (63.5, 23.495) -> (76.2, 23.495)
  line L1 (76.2, 23.495) -> (76.2, 15.875)
  line L2 (76.2, 15.875) -> (63.5, 15.875)
  line L3 (63.5, 15.875) -> (63.5, 23.495)
  line L4 (0, 0) -> (0, 34.925) projected
  circle A0 centre (69.85, 19.685) radius 3.81
  line L5 (0, 34.925) -> (177.8, 34.925) projected
  dimension "d156" = 7.62
  dimension "d157" = 63.5
  dimension "d158" = 12.7
  dimension "d164" = 11.43
  dimension "d165" = 15.24
extrude "Extrusion14" cut sketch "Sketch11" against normal blind 6.35 contours A0
sketch "Sketch12" plane through (-172.72, 0, -109.22) normal (0, 0, 1) x (1, 0, 0)
  line L0 (96.52, 15.875) -> (109.22, 15.875)
  line L1 (109.22, 15.875) -> (109.22, 23.495)
  line L2 (109.22, 23.495) -> (96.52, 23.495)
  line L3 (96.52, 23.495) -> (96.52, 15.875)
  circle A0 centre (102.87, 19.685) radius 3.81 projected
  line L4 (96.52, 15.875) -> (109.22, 23.495) construction
  line L5 (109.22, 15.875) -> (96.52, 23.495) construction
  point P0 (172.72, 0)
  point P1 (102.87, 15.875)
  point P2 (102.87, 23.495)
  dimension "d161" = 12.7
extrude "Extrusion15" cut sketch "Sketch12" against normal blind 2.0574 contours L3 L2 A0 L0 | A0 L2 L1 L0
sketch "Sketch13" plane through (0, 35.56, 0) normal (0, -1, 0) x (1, 0, 0)
  line L0 (-48.3394, -99.6918) -> (-48.3394, -14.6018) projected
  line L1 (-48.3394, -31.1933) -> (-46.4344, -31.1933)
  line L2 (-46.4344, -31.1933) -> (-46.4344, -36.2733)
  line L3 (-46.4344, -36.2733) -> (-48.3394, -36.2733)
  line L4 (-48.3394, -36.2733) -> (-48.3394, -31.1933)
  line L5 (-33.0994, -14.6018) -> (-33.0994, -99.6918) projected
  line L6 (-33.0994, -36.2733) -> (-35.0044, -36.2733)
  line L7 (-35.0044, -36.2733) -> (-35.0044, -31.1933)
  line L8 (-35.0044, -31.1933) -> (-33.0994, -31.1933)
  line L9 (-33.0994, -31.1933) -> (-33.0994, -36.2733)
  line L10 (-46.4344, -31.1933) -> (-51.5144, -31.1933)
  line L11 (-51.5144, -31.1933) -> (-51.5144, -36.2733)
  line L12 (-51.5144, -36.2733) -> (-46.4344, -36.2733)
  line L13 (-46.4344, -36.2733) -> (-46.4344, -31.1933)
  line L14 (-35.0044, -31.1933) -> (-29.9244, -31.1933)
  line L15 (-29.9244, -31.1933) -> (-29.9244, -36.2733)
  line L16 (-29.9244, -36.2733) -> (-35.0044, -36.2733)
  line L17 (-35.0044, -36.2733) -> (-35.0044, -31.1933)
  line L18 (-48.3394, -78.5039) -> (-46.4344, -78.5039)
  line L19 (-46.4344, -78.5039) -> (-46.4344, -83.5839)
  line L20 (-46.4344, -83.5839) -> (-48.3394, -83.5839)
  line L21 (-48.3394, -83.5839) -> (-48.3394, -78.5039)
  line L22 (-33.0994, -78.5039) -> (-35.0044, -78.5039)
  line L23 (-35.0044, -78.5039) -> (-35.0044, -83.5839)
  line L24 (-35.0044, -83.5839) -> (-33.0994, -83.5839)
  line L25 (-33.0994, -83.5839) -> (-33.0994, -78.5039)
  line L26 (-46.4344, -78.5039) -> (-51.5144, -78.5039)
  line L27 (-51.5144, -78.5039) -> (-51.5144, -83.5839)
  line L28 (-51.5144, -83.5839) -> (-46.4344, -83.5839)
  line L29 (-46.4344, -83.5839) -> (-46.4344, -78.5039)
  line L30 (-35.0044, -78.5039) -> (-29.9244, -78.5039)
  line L31 (-29.9244, -78.5039) -> (-29.9244, -83.5839)
  line L32 (-29.9244, -83.5839) -> (-35.0044, -83.5839)
  line L33 (-35.0044, -83.5839) -> (-35.0044, -78.5039)
  point P0 (0, 0)
  dimension "d166" = 5.08
  dimension "d167" = 5.08
  dimension "d168" = 5.08
  dimension "d169" = 1.905
  dimension "d170" = 1.905
  dimension "d171" = 1.905
  dimension "d172" = 1.905
  dimension "d173" = 5.08
  dimension "d174" = 5.08
  dimension "d175" = 5.08
  dimension "d176" = 5.08
extrude "Extrusion16" add sketch "Sketch13" along normal blind 1.905
fillet "Fillet2" radius 3.175 4 edges at (-29.9244, 33.655, -81.0439) (-51.5144, 33.655, -81.0439) (-29.9244, 33.655, -33.7333) (-51.5144, 33.655, -33.7333)
sketch "Sketch14" plane through (-46.4344, 35.56, -36.2733) normal (0, 0, -1) x (-1, 0, 0)
  line L0 (1.905, 0) -> (0, 0) projected
  line L1 (0, 0) -> (0, -1.905) projected
  line L2 (1.905, 0) -> (0, 0)
  line L3 (0, 0) -> (0, -0.9525)
  line L4 (0, -0.9525) -> (1.905, -0.9525)
  line L5 (1.905, -0.9525) -> (1.905, 0)
  line L6 (-11.43, 0) -> (-13.335, 0) projected
  line L7 (-13.335, 0) -> (-11.43, 0)
  line L8 (-11.43, 0) -> (-11.43, -0.9525)
  line L9 (-11.43, -0.9525) -> (-13.335, -0.9525)
  line L10 (-13.335, -0.9525) -> (-13.335, 0)
  point P0 (-46.4344, -35.56)
  point P1 (-11.43, 0)
  dimension "d180" = 0.9525
  dimension "d181" = 0.9525
extrude "Extrusion17" cut sketch "Sketch14" along normal blind 50.8 and the other way blind 12.7
sketch "Sketch15" plane through (-5.08, 0, -5.08) normal (0, 0, -1) x (-1, 0, 0)
  line L0 (-38.9377, 59.5644) -> (198.5695, 59.5644)
  line L1 (198.5695, 59.5644) -> (198.5695, -28.7094)
  line L2 (198.5695, -28.7094) -> (-38.9377, -28.7094)
  line L3 (-38.9377, -28.7094) -> (-38.9377, 59.5644)
  point P0 (-5.08, 0)
extrude "Extrusion18" cut sketch "Sketch15" along normal blind 127
sketch "Sketch16" plane through (0, 0, -5.08) normal (0, 0, -1) x (-1, 0, 0)
  line L0 (-15.6131, 50.2038) -> (60.2501, 50.2038)
  line L1 (60.2501, -6.2366) -> (-15.6131, -6.2366)
  line L2 (-15.6131, -6.2366) -> (-15.6131, 50.2038)
  line L3 (105.4176, 46.3954) -> (184.8607, 46.3954)
  line L4 (184.8607, 46.3954) -> (184.8607, -9.588)
  line L5 (184.8607, -9.588) -> (105.4176, -9.588)
  line L6 (60.2501, 50.2038) -> (105.4176, 50.2038)
  line L7 (105.4176, 50.2038) -> (105.4176, 46.3954)
  line L8 (100.3144, 21.9836) -> (66.6482, 21.9836)
  line L9 (105.4176, -9.588) -> (60.2501, -9.588)
  line L10 (60.2501, -9.588) -> (60.2501, -6.2366)
  line L11 (66.6482, 6.4834) -> (100.3144, 6.4834)
  line L12 (100.3144, 6.4834) -> (100.3144, 21.9836)
  line L13 (66.6482, 21.9836) -> (66.6482, 6.4834)
  point P0 (0, 0)
extrude "Extrusion19" cut sketch "Sketch16" against normal blind 127
properties part number "PIC32_slot"
